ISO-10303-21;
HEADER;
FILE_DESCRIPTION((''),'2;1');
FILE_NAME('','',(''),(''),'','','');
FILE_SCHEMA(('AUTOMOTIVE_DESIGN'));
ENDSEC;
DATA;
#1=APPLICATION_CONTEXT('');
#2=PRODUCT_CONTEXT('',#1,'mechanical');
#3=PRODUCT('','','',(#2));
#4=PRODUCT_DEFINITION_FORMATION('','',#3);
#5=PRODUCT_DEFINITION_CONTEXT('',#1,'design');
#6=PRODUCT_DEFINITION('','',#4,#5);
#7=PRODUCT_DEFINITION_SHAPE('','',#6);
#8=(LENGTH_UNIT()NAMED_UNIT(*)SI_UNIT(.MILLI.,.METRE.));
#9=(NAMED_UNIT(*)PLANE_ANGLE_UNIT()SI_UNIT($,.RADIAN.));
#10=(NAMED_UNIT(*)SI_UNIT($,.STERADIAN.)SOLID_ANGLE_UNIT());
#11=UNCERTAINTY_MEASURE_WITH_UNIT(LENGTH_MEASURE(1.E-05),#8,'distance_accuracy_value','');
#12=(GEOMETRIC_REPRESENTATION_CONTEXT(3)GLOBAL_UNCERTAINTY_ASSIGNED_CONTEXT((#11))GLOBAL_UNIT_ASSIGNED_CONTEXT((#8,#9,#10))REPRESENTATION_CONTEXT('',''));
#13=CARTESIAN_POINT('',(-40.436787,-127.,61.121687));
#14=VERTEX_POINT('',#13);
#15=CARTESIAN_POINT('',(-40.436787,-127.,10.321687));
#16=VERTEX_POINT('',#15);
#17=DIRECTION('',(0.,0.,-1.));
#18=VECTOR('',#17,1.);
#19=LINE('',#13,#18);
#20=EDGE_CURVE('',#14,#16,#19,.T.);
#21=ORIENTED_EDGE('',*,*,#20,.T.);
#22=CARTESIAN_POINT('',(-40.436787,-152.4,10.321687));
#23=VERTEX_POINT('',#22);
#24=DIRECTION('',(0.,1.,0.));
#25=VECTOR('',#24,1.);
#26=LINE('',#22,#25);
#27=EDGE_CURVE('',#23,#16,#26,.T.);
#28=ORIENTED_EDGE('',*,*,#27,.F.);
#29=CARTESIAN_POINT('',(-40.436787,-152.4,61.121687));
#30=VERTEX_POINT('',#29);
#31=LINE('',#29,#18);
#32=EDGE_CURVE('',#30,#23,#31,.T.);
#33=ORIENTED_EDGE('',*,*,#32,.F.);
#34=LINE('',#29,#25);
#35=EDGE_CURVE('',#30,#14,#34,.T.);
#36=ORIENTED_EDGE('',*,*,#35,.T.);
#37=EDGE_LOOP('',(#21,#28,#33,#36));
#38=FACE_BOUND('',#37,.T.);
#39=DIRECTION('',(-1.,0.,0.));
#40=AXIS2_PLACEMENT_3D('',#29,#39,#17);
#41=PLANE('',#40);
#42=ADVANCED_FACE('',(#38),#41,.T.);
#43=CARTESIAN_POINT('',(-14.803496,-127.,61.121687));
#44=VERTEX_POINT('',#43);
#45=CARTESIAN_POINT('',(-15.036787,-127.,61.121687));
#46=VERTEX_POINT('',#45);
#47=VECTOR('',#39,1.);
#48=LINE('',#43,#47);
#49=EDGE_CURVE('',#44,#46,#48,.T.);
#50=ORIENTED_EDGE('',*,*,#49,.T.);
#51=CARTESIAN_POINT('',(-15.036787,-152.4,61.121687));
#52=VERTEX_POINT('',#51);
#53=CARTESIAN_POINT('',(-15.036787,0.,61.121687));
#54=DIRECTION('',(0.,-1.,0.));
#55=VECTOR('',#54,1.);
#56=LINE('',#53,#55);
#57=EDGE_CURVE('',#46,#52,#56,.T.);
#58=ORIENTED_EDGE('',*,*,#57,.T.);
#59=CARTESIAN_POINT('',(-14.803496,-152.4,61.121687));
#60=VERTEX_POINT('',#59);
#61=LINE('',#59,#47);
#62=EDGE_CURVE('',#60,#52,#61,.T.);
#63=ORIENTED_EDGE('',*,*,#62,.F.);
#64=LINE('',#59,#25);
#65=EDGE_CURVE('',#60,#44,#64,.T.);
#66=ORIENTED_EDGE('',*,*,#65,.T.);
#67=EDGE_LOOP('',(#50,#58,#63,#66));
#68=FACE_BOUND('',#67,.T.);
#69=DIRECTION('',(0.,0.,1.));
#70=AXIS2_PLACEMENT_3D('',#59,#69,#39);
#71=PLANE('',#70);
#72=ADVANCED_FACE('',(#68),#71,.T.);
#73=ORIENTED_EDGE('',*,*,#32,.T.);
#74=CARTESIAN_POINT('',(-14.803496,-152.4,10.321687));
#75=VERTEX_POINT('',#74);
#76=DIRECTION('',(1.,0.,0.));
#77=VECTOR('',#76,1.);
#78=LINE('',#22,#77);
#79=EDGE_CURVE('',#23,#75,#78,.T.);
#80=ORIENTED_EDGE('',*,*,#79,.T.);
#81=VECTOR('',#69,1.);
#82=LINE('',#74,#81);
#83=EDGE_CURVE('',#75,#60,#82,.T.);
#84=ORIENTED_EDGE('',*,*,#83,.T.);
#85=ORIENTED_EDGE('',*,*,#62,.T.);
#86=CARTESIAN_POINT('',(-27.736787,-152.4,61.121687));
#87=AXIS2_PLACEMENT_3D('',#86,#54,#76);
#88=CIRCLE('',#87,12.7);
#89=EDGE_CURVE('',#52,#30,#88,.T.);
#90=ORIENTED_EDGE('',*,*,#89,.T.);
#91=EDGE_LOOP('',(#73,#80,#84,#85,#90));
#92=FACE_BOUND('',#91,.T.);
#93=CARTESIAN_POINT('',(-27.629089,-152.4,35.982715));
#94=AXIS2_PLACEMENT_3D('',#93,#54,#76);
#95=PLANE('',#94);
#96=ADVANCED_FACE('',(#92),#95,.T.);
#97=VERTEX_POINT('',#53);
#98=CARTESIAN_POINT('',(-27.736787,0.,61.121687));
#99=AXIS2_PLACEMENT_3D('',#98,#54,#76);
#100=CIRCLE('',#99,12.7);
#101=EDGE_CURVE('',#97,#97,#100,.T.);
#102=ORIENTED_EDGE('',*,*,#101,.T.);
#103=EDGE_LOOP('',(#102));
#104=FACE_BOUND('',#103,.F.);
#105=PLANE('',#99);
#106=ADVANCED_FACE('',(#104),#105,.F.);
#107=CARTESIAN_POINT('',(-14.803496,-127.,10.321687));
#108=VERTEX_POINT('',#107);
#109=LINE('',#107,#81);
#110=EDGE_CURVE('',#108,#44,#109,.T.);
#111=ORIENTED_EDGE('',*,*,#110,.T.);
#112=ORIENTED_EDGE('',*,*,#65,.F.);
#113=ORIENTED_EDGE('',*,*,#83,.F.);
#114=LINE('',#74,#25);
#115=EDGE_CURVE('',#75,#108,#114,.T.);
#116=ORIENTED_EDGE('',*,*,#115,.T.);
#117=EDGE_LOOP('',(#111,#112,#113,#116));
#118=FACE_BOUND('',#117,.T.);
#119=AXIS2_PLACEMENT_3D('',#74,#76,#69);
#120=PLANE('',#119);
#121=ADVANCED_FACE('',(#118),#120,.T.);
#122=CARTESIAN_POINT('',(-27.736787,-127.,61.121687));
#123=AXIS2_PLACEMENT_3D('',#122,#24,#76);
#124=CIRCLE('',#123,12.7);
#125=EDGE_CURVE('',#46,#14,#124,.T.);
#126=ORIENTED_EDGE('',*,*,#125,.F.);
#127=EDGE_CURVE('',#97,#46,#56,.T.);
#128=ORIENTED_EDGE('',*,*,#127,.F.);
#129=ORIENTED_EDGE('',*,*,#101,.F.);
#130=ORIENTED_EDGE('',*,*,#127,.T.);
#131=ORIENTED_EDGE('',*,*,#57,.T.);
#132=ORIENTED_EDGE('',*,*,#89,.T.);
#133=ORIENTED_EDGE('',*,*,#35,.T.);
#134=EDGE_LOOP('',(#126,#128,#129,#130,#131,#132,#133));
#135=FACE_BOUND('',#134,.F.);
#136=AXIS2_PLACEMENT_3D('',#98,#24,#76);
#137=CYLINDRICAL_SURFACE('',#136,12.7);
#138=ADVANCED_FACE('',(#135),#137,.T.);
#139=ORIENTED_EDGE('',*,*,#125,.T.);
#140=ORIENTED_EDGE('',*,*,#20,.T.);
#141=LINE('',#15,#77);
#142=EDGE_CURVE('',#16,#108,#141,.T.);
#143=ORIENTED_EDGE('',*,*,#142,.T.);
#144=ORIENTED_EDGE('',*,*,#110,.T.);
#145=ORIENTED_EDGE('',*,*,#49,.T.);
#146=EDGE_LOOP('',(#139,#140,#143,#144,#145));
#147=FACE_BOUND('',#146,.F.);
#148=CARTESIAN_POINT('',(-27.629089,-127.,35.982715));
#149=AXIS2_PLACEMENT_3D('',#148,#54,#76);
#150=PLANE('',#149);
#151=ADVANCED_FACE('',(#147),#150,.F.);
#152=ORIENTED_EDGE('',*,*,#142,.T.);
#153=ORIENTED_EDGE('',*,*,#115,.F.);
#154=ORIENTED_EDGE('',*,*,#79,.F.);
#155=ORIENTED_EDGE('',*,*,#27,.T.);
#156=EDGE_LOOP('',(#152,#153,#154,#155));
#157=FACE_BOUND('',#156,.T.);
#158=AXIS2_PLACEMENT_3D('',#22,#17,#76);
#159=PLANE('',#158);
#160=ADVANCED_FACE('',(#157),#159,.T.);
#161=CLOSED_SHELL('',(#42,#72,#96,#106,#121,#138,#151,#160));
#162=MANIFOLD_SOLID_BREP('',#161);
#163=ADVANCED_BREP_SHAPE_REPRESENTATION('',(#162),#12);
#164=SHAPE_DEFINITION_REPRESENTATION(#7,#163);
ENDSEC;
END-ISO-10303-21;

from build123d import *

# Parameters (mm, degrees)
F1_R     = 12.7
F2_DEPTH = 152.4
F4_DEPTH = 25.4


with BuildPart() as f2:
    # F1 (on face) → F2 (new body)
    with BuildSketch(Plane.XZ):
        with Locations((-27.7367867529, 61.1216872931)):
            Circle(F1_R)
    extrude(amount=F2_DEPTH)

    # F3 (on face) → F4 (join)
    with BuildSketch(Plane.XZ.offset(152.4)):
        with BuildLine():
            Line((-14.8034961894, 61.1216872931), (-15.0367867529, 61.1216872931))
            ThreePointArc((-15.0367867529, 61.1216872931), (-27.7367867529, 48.4216872931), (-40.4367867529, 61.1216872931))
            Line((-40.4367867529, 61.1216872931), (-40.4367867529, 10.3216872931))
            Line((-40.4367867529, 10.3216872931), (-14.8034961894, 10.3216872931))
            Line((-14.8034961894, 10.3216872931), (-14.8034961894, 61.1216872931))
        make_face()
    extrude(amount=-F4_DEPTH)


solid = f2.part
